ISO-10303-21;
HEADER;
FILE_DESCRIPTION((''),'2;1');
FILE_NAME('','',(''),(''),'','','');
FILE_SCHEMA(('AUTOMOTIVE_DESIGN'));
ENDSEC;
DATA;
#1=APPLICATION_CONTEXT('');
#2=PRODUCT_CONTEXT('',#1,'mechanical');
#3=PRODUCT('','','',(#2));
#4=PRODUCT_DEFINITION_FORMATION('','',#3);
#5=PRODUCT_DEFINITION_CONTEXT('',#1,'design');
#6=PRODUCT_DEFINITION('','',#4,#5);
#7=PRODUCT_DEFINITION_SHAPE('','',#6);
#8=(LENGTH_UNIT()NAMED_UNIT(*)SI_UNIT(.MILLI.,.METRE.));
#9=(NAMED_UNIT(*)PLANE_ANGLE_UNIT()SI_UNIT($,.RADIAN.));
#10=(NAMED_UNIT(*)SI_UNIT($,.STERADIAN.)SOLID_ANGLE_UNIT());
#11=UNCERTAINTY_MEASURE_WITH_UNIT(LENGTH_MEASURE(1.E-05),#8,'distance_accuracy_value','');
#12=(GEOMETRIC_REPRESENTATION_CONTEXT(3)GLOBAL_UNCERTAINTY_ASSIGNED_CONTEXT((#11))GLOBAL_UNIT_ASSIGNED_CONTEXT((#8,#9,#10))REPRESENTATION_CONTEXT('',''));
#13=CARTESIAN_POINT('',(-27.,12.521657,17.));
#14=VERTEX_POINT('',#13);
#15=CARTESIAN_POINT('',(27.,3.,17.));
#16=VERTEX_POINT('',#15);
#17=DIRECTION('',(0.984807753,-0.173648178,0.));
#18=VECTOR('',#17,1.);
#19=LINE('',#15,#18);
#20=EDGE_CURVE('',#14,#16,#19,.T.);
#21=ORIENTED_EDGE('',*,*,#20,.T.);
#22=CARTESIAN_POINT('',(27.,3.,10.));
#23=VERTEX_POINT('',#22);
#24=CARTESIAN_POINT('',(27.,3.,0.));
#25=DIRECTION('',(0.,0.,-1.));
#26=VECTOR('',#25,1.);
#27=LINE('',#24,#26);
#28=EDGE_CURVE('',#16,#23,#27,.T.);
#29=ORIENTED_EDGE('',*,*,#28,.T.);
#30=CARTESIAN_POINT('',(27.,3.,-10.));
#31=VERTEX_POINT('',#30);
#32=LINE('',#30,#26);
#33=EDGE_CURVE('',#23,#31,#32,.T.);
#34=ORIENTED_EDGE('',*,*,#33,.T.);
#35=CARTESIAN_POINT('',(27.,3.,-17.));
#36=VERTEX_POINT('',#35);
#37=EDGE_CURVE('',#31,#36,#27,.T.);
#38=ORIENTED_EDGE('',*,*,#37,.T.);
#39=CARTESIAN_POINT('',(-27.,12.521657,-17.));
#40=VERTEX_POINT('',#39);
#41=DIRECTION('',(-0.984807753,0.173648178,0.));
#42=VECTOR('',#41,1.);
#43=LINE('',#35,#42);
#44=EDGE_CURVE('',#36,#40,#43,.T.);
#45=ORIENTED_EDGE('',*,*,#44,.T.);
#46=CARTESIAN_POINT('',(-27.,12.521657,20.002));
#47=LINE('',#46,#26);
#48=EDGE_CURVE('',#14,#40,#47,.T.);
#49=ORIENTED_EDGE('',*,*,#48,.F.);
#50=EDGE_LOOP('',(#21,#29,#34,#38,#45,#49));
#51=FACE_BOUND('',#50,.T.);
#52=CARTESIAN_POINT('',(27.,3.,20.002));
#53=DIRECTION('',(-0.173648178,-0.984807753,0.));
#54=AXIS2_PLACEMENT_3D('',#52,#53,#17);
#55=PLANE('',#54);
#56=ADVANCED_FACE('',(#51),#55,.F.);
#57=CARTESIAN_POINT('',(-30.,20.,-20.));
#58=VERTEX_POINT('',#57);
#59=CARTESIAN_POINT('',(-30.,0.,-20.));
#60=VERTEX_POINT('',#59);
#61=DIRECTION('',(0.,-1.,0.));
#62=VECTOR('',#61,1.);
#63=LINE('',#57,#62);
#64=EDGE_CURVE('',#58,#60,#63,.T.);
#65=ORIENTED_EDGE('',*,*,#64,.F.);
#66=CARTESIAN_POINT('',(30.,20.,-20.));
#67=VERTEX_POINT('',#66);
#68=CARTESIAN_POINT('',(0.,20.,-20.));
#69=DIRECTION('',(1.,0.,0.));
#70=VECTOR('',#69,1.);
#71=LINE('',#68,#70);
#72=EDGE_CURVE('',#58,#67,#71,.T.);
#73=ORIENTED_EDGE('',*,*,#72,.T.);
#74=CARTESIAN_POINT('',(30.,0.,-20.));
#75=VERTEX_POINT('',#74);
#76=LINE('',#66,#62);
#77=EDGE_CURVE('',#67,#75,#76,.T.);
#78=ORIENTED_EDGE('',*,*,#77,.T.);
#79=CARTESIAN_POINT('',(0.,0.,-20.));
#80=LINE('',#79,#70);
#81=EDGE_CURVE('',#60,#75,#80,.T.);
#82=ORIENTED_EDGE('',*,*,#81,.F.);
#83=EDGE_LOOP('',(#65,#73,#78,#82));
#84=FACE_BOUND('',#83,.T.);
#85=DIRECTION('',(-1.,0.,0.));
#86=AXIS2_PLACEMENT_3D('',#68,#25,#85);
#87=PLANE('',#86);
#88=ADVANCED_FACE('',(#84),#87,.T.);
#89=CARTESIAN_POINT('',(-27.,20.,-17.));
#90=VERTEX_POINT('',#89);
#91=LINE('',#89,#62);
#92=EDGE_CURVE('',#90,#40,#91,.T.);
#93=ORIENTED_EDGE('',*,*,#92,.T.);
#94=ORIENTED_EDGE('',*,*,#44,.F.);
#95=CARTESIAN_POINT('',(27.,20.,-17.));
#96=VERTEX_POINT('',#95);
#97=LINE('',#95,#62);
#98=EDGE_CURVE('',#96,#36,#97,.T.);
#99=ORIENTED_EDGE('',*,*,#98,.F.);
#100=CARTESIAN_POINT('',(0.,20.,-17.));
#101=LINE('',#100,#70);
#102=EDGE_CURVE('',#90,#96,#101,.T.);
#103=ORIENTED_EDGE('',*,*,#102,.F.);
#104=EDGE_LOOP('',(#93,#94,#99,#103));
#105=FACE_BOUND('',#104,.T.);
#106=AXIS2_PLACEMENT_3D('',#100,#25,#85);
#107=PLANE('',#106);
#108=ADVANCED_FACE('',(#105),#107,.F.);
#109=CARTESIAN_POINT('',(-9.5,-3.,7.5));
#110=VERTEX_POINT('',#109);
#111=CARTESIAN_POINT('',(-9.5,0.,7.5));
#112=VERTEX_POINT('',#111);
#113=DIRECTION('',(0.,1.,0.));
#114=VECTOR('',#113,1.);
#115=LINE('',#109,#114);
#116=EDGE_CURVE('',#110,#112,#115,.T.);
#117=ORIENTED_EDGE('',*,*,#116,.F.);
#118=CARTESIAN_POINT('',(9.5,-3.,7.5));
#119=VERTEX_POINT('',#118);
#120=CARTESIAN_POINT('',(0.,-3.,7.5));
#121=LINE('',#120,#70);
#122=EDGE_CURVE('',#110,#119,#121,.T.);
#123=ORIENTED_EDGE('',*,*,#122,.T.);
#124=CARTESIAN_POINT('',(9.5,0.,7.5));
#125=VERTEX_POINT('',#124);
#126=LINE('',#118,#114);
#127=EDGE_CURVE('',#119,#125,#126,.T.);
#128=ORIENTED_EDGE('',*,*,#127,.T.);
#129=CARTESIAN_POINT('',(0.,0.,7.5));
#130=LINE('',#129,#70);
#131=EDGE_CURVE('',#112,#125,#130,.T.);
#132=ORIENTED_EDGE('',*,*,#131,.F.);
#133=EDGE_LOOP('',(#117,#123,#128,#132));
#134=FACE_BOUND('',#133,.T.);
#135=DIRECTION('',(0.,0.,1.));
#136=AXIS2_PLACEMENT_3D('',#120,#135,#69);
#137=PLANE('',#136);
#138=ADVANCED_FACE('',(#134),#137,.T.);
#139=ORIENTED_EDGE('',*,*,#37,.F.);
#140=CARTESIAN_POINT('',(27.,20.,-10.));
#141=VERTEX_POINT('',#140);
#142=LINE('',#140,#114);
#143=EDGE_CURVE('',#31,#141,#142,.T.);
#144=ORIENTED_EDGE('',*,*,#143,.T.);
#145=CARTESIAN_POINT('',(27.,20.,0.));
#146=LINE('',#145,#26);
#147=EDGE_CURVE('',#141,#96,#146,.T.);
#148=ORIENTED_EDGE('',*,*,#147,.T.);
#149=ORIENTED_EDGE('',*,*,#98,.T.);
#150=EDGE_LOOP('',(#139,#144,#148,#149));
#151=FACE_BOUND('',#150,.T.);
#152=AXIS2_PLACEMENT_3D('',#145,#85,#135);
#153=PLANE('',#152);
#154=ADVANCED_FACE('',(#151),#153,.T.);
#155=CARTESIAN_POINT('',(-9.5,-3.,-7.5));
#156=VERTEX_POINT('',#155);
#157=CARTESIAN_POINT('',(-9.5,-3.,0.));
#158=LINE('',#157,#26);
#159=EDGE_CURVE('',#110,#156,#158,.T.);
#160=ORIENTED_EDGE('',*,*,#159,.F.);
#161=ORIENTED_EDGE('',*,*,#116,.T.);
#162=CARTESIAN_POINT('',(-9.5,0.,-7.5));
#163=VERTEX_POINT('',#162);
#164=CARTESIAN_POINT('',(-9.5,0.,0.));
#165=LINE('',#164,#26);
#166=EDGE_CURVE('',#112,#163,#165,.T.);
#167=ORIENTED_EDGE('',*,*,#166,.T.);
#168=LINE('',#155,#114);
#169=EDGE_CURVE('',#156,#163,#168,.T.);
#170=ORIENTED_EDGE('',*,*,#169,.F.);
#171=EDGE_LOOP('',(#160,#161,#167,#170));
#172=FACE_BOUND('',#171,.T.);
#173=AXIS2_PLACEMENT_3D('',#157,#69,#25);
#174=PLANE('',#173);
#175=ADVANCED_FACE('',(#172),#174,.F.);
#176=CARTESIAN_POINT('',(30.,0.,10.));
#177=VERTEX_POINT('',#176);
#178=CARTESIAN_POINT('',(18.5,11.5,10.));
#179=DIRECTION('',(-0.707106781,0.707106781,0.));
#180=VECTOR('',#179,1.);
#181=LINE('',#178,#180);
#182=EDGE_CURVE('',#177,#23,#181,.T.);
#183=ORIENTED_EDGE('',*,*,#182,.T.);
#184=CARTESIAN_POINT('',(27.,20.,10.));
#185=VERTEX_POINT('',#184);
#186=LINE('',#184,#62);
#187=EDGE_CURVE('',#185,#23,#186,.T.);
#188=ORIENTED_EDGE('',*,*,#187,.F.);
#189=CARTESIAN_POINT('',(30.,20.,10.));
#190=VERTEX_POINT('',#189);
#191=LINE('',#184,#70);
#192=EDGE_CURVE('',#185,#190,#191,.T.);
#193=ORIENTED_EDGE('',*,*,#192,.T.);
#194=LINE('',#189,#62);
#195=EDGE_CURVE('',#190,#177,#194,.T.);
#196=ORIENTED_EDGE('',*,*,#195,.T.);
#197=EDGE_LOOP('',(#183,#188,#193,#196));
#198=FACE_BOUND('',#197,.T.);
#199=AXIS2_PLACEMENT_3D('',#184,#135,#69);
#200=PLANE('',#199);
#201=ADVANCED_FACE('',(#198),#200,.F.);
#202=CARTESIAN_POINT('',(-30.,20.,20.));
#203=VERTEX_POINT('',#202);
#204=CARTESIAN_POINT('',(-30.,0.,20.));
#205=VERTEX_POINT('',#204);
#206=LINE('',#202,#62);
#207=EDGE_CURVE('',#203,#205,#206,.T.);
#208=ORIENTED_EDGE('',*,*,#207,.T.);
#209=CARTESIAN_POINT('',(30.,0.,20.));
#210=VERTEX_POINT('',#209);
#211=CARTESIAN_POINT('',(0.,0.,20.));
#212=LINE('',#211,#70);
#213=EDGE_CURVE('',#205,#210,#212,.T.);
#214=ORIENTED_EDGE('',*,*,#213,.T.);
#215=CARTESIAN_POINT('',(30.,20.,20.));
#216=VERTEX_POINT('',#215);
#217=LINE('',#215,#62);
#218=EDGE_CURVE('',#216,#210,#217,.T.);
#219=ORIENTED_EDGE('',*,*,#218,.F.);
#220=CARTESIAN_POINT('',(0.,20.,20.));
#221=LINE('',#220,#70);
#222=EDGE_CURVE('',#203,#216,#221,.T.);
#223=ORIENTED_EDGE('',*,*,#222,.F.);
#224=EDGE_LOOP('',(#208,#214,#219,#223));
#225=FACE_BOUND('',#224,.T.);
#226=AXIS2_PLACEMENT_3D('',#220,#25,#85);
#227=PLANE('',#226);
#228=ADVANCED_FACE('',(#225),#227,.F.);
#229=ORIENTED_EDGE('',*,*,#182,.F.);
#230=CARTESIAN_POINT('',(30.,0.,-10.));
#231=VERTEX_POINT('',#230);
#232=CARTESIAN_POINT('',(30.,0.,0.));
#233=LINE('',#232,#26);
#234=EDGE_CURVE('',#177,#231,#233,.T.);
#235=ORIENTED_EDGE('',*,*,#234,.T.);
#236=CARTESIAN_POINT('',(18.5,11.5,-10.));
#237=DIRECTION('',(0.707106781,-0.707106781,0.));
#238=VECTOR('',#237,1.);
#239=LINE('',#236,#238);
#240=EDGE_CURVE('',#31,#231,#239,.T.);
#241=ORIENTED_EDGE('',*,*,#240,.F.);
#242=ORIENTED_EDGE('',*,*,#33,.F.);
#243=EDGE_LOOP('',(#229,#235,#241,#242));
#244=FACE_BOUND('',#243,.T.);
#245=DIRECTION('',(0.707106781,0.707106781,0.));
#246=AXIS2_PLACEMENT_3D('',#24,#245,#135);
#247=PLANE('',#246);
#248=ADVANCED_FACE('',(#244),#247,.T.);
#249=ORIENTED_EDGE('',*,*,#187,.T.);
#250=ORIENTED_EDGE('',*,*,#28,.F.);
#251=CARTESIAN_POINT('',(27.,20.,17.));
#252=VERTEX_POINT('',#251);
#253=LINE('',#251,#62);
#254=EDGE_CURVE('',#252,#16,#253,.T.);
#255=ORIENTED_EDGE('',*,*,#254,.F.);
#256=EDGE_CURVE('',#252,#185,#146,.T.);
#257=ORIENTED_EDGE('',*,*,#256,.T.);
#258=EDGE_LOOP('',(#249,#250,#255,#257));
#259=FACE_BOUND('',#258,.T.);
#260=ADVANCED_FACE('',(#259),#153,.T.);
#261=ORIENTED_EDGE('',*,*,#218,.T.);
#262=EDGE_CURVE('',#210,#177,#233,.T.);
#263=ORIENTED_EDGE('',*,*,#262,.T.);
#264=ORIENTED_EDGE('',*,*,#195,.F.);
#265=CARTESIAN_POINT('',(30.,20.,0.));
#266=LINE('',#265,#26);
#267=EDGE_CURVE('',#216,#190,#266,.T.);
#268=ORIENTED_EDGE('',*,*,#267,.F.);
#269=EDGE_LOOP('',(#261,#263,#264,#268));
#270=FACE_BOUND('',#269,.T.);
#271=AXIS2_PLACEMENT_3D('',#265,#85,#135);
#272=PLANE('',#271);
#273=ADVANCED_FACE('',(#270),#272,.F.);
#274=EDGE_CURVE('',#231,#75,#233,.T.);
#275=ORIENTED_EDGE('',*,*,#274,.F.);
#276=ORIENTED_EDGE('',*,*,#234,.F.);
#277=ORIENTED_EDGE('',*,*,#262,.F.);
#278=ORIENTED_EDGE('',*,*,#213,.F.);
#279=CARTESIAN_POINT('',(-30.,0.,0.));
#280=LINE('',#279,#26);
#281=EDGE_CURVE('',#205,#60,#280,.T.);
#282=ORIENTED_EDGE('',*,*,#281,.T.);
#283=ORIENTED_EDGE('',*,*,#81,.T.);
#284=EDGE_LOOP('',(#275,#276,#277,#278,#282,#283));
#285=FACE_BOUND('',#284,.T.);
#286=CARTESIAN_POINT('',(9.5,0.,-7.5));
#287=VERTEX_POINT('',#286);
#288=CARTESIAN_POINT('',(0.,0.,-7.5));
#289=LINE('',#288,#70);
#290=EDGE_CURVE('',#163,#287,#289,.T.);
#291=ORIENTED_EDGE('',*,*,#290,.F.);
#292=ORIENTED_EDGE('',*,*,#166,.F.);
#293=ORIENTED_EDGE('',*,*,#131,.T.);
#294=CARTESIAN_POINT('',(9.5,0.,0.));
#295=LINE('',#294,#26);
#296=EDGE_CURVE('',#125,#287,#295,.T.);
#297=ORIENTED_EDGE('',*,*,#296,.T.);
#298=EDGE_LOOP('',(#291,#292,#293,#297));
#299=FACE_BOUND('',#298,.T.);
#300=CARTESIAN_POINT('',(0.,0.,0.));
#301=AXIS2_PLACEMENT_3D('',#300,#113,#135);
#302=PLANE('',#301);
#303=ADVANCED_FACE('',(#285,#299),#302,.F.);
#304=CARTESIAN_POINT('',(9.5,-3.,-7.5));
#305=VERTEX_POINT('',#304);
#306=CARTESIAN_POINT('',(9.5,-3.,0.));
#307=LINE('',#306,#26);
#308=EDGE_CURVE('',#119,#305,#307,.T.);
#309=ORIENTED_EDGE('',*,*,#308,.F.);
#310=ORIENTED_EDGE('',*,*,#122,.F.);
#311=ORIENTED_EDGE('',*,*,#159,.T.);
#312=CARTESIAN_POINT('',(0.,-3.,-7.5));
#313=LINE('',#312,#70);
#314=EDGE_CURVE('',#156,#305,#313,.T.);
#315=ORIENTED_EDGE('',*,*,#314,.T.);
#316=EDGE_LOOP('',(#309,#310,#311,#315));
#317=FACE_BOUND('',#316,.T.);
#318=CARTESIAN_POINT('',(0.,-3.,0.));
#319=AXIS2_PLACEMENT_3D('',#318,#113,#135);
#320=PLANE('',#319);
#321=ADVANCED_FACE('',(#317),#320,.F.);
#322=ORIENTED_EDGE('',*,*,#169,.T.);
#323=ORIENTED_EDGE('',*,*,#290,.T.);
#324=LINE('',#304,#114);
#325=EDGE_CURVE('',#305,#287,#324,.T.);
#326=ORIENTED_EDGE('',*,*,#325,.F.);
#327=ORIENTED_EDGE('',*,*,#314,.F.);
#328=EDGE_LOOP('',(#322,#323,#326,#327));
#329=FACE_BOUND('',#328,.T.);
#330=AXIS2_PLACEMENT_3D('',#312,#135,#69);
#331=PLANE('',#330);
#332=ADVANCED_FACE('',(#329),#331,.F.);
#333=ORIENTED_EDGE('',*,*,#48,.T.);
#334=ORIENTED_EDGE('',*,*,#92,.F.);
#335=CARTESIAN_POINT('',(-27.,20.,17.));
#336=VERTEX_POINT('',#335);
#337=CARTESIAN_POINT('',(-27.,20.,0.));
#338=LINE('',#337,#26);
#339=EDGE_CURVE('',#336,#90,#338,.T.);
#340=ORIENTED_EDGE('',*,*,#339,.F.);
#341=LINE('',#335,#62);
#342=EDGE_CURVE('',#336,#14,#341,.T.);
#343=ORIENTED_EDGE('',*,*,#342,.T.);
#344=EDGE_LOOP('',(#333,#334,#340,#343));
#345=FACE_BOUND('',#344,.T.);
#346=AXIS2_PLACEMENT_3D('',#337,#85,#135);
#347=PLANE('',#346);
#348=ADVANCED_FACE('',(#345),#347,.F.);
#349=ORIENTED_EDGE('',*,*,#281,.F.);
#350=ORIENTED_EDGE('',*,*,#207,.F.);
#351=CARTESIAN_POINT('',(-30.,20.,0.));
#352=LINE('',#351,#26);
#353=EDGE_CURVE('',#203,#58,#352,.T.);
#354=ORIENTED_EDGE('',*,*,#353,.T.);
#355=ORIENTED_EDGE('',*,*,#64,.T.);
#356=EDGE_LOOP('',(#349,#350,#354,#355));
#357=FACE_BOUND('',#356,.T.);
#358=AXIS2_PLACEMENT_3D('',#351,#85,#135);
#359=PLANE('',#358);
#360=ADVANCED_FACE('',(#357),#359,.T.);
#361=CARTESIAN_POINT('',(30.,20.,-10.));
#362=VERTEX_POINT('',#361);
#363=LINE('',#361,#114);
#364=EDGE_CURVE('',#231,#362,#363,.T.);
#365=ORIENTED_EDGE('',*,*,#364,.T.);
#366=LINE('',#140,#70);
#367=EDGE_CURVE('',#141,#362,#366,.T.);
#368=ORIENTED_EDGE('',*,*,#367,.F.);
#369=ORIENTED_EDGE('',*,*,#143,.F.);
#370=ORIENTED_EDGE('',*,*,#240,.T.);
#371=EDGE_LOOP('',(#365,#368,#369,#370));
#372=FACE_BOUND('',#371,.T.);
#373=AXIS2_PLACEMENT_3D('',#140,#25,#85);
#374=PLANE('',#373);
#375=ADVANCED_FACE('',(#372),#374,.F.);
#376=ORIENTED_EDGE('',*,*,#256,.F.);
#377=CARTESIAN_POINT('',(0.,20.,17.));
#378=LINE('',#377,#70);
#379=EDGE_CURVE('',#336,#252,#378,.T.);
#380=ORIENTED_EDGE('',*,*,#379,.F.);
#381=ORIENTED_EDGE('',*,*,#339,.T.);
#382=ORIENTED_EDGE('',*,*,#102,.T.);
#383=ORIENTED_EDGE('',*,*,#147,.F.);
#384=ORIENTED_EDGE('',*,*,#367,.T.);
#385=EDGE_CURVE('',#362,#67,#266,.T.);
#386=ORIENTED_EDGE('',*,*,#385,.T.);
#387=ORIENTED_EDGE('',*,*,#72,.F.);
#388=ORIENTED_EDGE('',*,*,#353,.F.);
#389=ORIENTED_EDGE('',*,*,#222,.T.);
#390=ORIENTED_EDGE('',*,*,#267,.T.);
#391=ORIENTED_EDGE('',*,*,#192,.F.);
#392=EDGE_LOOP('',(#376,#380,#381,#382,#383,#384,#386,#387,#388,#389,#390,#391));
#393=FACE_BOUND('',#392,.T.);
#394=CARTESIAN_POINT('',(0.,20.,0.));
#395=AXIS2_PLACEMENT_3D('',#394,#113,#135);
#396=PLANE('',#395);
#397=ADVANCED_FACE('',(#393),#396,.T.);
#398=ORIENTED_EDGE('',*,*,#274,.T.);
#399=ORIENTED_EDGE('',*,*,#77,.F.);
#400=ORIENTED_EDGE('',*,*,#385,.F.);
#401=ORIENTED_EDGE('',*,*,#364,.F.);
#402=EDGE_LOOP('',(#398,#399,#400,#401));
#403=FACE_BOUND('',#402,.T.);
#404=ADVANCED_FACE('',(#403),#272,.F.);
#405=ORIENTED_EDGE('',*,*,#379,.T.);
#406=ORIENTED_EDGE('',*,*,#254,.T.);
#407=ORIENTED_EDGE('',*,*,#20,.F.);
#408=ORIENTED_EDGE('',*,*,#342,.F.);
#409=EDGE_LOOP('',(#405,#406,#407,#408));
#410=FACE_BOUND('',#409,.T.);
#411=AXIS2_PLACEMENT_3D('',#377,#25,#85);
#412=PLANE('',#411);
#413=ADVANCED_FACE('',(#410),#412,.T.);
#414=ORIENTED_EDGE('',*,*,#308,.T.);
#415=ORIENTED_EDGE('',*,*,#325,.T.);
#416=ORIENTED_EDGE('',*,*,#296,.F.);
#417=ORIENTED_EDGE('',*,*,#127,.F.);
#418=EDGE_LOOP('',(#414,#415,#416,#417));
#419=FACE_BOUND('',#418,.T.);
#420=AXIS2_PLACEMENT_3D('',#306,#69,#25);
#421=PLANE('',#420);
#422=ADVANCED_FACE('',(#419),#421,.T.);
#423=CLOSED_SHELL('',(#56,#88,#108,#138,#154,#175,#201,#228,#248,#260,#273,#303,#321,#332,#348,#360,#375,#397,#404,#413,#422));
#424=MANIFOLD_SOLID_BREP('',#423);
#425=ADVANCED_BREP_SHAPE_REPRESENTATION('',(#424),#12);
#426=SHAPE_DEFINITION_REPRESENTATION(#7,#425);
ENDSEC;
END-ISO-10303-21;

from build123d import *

# Parameters (mm, degrees)
SKETCH1_W           = 60
SKETCH1_H           = 40
SKETCH1_W_2         = 19
SKETCH1_H_2         = 15
BOSS_EXTRUDE1_DEPTH = 20
SHELL2_T            = -3
SKETCH1_3_W         = 19
SKETCH1_3_H         = 15
BOSS_EXTRUDE2_DEPTH = 3
SKETCH2_W           = 20
SKETCH2_H           = 17
CUT_EXTRUDE1_DEPTH  = 3
CHAMFER1_SIZE       = 3
BOSS_EXTRUDE3_REACH = 53.662


with BuildPart() as part:
    # Sketch1 → Boss-Extrude1 (new body)
    # profile 1 of 2: a face of its own
    with BuildSketch(Plane(origin=(0, 0, 0), x_dir=(1, 0, 0), z_dir=(0, 1, 0))):
        Rectangle(SKETCH1_W, SKETCH1_H)
        Rectangle(SKETCH1_W_2, SKETCH1_H_2, mode=Mode.SUBTRACT)
    # profile 2 of 2: a face of its own
    with BuildSketch(Plane(origin=(0, 0, 0), x_dir=(1, 0, 0), z_dir=(0, 1, 0))):
        Rectangle(SKETCH1_W_2, SKETCH1_H_2)
    extrude(amount=BOSS_EXTRUDE1_DEPTH)

    # Shell2
    shell2_openings = [part.faces().sort_by_distance(p)[0] for p in [
        (0, 20, 0),
    ]]
    offset(amount=SHELL2_T, openings=shell2_openings, kind=Kind.INTERSECTION)

    # Sketch1<3> → Boss-Extrude2 (add)
    with BuildSketch(Plane(origin=(0, 0, 0), x_dir=(1, 0, 0), z_dir=(0, 1, 0))):
        Rectangle(SKETCH1_3_W, SKETCH1_3_H)
    extrude(amount=-BOSS_EXTRUDE2_DEPTH)

    # Sketch2 → Cut-Extrude1 (cut)
    with BuildSketch(Plane(origin=(30, 0, 0), x_dir=(0, 0, -1), z_dir=(1, 0, 0))):
        with Locations((0, 11.5)):
            Rectangle(SKETCH2_W, SKETCH2_H)
    extrude(amount=-CUT_EXTRUDE1_DEPTH, mode=Mode.SUBTRACT)

    # Chamfer1
    chamfer1_edges = [part.edges().sort_by_distance(p)[0] for p in [
        (30, 3, 0),
    ]]
    chamfer(chamfer1_edges, length=CHAMFER1_SIZE - 0.0001)  # a hair under: the kernel refuses the full size

    # Sketch3 → Boss-Extrude3 (add, up to next)
    with BuildSketch(Plane.XY.offset(-17), mode=Mode.PRIVATE) as boss_extrude3_sk1:
        Polygon((-27, 3), (27, 3), (-27, 12.521656958), align=None)
    boss_extrude3_tool1 = extrude(boss_extrude3_sk1.sketch, amount=BOSS_EXTRUDE3_REACH, mode=Mode.PRIVATE) - part.part
    add(boss_extrude3_tool1.solids().sort_by_distance((-9, 6.173886, -17))[0])


solid = part.part
